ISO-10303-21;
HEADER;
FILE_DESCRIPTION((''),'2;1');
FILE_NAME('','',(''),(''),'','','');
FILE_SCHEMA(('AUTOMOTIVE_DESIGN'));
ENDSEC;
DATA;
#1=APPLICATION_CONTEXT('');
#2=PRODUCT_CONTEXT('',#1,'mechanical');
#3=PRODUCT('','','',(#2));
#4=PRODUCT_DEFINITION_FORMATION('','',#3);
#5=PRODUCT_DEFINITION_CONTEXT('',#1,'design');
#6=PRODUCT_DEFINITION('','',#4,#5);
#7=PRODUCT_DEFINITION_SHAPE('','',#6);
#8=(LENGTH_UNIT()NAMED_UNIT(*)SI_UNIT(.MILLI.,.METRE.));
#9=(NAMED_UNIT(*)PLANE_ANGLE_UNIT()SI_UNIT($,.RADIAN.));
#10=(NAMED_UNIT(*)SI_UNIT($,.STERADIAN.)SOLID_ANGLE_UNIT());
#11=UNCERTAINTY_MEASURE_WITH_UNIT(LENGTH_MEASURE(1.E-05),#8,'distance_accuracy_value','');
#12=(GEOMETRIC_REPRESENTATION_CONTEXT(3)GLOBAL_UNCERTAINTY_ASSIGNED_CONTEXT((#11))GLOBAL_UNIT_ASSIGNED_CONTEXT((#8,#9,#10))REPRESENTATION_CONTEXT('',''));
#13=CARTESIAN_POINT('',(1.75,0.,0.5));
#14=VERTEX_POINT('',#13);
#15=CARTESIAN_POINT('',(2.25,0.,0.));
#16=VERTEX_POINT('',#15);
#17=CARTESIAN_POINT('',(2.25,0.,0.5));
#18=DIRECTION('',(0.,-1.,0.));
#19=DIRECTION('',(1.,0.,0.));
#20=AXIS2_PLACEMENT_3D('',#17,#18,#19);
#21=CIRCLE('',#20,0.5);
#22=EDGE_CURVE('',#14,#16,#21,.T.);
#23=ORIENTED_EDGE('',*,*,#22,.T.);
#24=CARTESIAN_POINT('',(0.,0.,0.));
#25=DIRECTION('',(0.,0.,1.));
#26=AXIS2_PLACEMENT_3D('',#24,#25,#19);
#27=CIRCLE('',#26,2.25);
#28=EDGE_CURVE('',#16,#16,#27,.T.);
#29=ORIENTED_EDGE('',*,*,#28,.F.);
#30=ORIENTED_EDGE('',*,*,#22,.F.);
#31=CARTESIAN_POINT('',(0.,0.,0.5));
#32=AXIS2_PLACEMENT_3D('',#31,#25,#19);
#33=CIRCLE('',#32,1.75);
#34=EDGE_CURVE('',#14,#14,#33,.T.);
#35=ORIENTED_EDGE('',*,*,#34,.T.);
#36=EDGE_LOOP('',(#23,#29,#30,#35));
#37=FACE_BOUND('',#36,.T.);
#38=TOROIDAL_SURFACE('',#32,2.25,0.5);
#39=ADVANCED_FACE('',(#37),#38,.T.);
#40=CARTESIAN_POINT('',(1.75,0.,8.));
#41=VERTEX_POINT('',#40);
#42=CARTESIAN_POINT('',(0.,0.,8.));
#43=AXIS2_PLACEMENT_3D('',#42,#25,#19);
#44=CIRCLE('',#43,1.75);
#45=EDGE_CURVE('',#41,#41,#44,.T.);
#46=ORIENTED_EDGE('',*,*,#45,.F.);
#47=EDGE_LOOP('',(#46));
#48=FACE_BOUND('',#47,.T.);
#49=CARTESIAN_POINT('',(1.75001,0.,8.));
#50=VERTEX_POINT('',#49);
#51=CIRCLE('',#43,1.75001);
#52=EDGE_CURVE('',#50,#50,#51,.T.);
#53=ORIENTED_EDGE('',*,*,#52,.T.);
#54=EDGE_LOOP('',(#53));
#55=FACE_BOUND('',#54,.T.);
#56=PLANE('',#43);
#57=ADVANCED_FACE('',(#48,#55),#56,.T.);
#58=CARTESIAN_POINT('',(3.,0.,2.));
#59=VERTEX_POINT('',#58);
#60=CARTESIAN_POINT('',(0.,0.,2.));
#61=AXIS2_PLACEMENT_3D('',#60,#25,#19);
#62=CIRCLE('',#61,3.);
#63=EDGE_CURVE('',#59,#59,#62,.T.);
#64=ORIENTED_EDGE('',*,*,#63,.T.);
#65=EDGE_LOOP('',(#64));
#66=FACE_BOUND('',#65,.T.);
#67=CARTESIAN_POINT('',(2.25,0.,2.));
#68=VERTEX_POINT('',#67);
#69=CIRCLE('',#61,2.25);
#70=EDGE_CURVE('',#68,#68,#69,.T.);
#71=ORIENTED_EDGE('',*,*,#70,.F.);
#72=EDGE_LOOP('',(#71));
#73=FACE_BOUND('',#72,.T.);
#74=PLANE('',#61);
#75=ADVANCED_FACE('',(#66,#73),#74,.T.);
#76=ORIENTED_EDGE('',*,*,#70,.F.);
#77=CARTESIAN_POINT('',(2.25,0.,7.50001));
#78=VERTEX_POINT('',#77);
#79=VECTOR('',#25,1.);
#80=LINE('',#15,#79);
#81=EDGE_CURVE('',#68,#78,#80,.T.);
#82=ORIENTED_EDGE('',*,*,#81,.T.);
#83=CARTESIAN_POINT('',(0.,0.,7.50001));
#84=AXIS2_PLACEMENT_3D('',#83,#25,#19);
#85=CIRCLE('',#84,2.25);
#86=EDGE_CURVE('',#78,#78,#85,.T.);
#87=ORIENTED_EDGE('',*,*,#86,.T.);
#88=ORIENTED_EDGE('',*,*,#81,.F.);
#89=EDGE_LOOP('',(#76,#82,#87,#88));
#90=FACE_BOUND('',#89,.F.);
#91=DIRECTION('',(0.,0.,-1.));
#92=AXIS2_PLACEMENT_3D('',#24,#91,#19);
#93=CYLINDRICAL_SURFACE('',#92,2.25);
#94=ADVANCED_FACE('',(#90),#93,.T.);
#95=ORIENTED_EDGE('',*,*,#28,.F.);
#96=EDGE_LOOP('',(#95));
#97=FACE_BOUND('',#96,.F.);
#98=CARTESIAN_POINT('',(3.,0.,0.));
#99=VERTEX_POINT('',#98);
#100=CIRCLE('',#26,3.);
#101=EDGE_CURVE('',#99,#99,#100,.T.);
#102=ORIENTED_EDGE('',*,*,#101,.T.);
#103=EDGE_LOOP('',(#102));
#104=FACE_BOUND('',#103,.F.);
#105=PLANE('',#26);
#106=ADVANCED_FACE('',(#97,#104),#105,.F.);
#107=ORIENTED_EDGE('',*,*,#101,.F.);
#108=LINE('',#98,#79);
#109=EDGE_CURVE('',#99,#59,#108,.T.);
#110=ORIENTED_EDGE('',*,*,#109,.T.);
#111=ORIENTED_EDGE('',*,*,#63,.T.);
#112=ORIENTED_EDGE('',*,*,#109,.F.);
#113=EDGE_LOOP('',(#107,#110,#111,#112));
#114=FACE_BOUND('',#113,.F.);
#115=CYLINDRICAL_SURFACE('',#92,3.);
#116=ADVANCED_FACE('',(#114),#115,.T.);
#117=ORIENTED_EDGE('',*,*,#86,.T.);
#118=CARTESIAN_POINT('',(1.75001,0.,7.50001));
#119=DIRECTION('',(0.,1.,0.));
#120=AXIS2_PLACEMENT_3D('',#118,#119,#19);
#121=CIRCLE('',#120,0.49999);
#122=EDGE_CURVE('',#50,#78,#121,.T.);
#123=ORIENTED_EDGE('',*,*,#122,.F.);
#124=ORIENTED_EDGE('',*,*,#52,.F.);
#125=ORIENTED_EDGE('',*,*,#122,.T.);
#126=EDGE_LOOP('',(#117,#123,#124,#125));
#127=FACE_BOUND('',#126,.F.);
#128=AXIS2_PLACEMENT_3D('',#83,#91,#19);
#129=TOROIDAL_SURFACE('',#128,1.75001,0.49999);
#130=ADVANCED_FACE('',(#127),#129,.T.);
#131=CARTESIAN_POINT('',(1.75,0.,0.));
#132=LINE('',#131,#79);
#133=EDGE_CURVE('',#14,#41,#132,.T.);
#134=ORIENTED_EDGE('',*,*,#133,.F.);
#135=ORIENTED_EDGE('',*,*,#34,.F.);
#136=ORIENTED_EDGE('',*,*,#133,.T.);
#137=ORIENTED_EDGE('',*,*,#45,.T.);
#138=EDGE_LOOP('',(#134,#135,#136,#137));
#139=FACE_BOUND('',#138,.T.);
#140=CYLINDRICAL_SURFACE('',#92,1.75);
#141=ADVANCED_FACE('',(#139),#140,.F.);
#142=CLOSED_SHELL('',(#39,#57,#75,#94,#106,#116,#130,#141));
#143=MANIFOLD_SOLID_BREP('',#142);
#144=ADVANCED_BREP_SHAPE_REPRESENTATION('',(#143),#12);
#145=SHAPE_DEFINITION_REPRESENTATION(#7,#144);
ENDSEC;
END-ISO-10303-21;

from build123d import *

# Parameters (mm, degrees)
F0_R     = 3
F0_R_2   = 2.25
F1_DEPTH = 2
F0_R_3   = 1.75
F2_DEPTH = 8
F3_R     = 0.5
F4_R     = 0.49999


# Not quite as in the source:
# - a fillet or chamfer is up to 0.001 mm smaller than in the source, because OpenCascade refuses the exact size


with BuildPart() as f1:
    # F0 (on Top) → F1 (new body)
    with BuildSketch(Plane.XY):
        Circle(F0_R)
        Circle(F0_R_2, mode=Mode.SUBTRACT)
    extrude(amount=F1_DEPTH)

    # F0 (on Top) → F2 (join)
    with BuildSketch(Plane.XY):
        Circle(F0_R_2)
        Circle(F0_R_3, mode=Mode.SUBTRACT)
    extrude(amount=F2_DEPTH)

    # F3
    f3_edges = [f1.edges().sort_by_distance(p)[0] for p in [
        (-1.75, 0, 0),
    ]]
    fillet(f3_edges, radius=F3_R)

    # F4 (radius 0.5 in the source; OpenCascade refuses exactly that, so slightly less here)
    f4_edges = [f1.edges().sort_by_distance(p)[0] for p in [
        (-2.25, 0, 8),
    ]]
    fillet(f4_edges, radius=F4_R)


solid = f1.part
